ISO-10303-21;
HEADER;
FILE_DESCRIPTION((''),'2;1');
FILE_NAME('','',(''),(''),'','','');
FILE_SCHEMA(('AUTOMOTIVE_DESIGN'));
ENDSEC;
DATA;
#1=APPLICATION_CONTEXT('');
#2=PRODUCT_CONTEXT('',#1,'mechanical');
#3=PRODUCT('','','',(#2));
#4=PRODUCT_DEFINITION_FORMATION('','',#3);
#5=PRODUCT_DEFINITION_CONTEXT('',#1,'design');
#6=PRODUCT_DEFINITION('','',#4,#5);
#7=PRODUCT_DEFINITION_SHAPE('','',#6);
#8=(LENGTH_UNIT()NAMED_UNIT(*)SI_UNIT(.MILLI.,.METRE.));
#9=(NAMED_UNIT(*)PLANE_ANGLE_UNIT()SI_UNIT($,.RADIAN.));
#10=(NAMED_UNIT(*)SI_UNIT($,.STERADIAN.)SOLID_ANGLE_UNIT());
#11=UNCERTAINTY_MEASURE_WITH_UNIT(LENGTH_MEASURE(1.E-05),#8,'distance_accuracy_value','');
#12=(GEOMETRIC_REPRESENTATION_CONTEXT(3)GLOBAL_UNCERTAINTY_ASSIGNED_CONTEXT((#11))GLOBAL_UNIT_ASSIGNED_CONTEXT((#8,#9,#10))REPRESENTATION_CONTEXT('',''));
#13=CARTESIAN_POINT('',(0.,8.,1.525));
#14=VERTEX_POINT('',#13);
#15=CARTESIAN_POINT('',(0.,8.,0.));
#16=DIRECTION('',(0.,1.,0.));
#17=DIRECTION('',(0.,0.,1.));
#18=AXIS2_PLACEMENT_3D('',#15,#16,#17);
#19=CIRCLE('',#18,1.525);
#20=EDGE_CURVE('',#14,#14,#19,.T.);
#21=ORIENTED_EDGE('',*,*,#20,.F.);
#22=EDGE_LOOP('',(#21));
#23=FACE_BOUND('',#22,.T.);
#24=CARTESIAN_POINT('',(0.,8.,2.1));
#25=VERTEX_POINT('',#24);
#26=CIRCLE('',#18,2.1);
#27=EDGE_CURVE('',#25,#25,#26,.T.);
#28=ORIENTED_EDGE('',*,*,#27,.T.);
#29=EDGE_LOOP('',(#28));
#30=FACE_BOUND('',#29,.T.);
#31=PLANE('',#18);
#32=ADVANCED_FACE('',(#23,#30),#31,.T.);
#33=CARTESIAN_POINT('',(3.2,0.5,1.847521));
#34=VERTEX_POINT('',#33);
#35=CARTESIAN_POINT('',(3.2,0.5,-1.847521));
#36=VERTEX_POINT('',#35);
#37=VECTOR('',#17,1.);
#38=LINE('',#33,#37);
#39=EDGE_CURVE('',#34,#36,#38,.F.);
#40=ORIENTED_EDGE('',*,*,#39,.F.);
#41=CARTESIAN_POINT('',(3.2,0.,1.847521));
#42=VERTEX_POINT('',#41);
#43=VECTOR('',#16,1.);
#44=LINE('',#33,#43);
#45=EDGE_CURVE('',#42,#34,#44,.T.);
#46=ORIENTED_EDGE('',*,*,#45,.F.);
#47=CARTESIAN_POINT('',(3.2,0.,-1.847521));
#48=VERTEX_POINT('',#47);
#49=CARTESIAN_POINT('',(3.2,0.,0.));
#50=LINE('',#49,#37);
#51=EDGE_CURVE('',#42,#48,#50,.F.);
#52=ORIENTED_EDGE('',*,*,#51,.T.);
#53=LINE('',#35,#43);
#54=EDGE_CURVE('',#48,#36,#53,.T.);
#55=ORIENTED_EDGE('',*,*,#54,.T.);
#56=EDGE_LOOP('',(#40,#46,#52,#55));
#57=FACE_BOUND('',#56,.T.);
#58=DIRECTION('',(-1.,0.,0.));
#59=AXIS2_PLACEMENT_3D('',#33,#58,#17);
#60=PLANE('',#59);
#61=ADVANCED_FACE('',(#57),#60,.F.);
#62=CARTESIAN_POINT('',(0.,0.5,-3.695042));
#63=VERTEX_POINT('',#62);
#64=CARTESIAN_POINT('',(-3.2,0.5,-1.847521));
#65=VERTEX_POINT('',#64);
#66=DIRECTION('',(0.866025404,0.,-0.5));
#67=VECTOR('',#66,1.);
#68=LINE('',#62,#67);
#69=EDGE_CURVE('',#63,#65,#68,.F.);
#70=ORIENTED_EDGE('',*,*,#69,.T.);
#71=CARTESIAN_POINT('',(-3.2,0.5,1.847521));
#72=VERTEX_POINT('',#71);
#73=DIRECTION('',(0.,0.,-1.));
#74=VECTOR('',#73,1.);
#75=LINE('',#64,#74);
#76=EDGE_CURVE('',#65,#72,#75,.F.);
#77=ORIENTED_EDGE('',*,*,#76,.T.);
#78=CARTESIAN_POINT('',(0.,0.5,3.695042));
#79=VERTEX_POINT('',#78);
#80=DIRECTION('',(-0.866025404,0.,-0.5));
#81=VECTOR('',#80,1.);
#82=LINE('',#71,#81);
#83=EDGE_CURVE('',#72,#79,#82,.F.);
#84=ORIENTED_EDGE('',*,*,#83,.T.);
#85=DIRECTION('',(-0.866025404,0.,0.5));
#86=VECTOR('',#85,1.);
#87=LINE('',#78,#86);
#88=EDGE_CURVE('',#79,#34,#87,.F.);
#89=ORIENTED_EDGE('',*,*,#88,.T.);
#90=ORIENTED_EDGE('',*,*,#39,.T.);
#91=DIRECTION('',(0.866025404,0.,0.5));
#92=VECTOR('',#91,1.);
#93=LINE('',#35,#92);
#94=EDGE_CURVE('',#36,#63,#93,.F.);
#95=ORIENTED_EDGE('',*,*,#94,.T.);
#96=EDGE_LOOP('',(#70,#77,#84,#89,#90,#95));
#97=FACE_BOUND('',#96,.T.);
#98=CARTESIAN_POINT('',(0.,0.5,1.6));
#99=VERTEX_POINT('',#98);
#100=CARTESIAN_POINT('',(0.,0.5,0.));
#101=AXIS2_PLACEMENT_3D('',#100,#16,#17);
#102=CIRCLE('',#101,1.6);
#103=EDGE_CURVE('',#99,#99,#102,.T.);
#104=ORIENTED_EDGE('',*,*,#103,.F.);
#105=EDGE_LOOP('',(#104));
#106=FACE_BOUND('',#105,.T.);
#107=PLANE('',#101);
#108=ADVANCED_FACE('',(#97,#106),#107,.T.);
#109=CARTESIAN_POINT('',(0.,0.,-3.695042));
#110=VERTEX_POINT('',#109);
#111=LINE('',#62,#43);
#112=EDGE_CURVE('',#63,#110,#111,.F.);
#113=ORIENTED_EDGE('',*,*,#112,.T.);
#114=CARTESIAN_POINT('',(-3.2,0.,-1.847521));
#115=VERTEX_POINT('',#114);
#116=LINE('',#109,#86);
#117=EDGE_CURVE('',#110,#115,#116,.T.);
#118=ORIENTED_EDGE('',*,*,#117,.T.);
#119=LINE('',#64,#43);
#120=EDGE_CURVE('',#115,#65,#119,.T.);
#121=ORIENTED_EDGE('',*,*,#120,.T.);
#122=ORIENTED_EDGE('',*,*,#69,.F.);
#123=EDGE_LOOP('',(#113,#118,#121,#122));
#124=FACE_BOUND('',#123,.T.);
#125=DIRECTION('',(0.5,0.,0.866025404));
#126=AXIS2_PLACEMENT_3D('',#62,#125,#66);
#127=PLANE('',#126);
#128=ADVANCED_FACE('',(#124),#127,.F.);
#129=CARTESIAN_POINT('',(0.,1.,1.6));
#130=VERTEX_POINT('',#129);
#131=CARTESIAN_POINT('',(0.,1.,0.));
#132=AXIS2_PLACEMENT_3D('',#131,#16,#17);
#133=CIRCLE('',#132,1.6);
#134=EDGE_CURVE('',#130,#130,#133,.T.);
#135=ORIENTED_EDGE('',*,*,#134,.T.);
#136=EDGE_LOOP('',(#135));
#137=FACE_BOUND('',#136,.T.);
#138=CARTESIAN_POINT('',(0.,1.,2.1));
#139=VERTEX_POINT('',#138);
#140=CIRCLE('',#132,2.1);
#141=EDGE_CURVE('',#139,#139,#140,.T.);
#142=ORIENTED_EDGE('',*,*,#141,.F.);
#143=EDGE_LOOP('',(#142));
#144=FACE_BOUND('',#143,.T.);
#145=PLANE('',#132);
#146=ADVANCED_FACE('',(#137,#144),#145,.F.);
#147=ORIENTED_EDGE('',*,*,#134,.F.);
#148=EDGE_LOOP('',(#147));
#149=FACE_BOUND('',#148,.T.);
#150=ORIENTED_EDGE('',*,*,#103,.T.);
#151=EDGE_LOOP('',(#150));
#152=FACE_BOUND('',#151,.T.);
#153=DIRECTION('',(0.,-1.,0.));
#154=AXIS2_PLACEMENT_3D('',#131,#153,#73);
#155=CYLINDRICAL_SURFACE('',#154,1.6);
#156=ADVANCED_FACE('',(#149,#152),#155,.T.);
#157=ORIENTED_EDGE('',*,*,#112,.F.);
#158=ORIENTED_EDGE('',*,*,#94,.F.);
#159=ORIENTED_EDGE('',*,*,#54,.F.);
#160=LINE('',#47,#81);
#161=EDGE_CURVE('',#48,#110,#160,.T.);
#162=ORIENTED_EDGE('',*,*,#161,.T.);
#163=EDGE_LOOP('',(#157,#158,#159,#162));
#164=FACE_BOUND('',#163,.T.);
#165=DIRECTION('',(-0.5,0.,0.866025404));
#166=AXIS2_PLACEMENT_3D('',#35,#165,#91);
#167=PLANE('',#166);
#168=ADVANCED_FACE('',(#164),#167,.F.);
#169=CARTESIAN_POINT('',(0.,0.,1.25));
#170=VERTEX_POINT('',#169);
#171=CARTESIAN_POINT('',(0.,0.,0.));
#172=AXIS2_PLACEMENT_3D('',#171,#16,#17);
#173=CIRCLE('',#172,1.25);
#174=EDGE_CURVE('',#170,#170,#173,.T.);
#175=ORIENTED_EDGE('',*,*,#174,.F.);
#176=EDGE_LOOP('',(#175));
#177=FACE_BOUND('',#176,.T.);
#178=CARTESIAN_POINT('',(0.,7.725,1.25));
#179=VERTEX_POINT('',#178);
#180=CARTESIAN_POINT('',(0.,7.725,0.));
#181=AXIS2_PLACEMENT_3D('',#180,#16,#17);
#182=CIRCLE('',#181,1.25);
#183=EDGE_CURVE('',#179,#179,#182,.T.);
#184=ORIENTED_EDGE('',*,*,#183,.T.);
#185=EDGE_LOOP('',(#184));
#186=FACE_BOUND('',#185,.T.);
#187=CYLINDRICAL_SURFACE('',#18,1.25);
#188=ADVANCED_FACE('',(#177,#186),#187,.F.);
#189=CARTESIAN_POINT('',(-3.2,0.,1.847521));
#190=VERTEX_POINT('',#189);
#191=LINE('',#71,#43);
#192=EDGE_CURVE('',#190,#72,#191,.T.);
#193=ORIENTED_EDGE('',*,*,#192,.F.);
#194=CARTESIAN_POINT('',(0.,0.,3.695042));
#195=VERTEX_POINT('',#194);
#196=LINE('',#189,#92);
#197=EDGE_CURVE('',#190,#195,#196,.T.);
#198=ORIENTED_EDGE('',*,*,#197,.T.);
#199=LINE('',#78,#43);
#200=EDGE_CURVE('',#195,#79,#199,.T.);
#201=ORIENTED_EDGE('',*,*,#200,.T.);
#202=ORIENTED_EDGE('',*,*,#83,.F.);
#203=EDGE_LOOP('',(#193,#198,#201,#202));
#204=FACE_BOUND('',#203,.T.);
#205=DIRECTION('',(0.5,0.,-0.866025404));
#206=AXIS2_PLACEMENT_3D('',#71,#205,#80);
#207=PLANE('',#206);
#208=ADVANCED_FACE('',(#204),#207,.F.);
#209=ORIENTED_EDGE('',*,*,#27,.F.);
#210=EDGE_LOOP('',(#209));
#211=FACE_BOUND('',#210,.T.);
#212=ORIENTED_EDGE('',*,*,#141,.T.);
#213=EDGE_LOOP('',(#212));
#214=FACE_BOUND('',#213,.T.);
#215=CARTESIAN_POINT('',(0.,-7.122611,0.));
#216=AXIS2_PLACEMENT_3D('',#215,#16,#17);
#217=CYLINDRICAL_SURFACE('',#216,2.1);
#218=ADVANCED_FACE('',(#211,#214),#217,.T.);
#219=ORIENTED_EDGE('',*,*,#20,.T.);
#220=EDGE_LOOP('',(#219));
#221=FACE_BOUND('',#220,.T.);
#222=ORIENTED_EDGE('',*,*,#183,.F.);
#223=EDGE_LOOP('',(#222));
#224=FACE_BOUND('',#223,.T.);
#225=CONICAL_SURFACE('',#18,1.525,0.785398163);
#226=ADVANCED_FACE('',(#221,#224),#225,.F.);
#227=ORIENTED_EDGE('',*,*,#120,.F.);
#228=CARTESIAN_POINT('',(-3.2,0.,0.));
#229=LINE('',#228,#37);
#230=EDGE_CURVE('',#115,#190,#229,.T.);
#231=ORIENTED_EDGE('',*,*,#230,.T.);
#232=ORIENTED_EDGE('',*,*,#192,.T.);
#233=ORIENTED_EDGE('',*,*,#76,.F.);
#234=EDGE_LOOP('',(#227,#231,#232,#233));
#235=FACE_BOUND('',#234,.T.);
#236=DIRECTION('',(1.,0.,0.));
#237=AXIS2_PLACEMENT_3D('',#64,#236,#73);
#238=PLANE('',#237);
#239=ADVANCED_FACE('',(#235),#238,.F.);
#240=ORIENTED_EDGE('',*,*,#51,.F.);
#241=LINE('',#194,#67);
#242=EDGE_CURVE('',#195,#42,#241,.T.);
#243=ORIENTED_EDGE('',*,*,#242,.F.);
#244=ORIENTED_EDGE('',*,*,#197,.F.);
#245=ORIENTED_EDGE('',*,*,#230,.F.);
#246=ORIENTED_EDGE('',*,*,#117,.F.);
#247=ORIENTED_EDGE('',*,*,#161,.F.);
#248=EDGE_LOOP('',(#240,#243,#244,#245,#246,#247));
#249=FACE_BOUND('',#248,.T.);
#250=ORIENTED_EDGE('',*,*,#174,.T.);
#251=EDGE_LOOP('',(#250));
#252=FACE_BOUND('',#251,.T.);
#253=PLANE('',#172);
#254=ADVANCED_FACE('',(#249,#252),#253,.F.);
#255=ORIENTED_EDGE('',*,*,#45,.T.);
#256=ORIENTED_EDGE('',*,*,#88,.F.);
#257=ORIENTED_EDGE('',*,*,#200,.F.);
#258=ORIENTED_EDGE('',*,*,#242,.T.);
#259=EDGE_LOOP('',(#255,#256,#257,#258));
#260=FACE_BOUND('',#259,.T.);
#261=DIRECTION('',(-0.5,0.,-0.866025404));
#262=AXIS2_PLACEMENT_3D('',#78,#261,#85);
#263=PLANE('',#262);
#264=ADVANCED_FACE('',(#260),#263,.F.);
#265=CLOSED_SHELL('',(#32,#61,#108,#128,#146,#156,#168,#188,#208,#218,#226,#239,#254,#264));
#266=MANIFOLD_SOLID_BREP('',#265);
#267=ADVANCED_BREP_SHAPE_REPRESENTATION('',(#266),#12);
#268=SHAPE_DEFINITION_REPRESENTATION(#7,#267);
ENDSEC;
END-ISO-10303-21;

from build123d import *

# Parameters (mm, degrees)
RESSALTO_EXTRUS_O1_START            = -4.5
RESSALTO_EXTRUS_O1_OUTLINE_R        = 2.5
RESSALTO_EXTRUS_O1_DEPTH            = 4.5
RESSALTO_EXTRUS_O1_START_2          = -3.5
RESSALTO_EXTRUS_O1_2_OUTLINE_R      = 2.695
RESSALTO_EXTRUS_O1_2_OUTLINE_R_2    = 2.5
RESSALTO_EXTRUS_O1_2_DEPTH          = 3.5
RESSALTO_EXTRUS_O1_3_OUTLINE_R      = 2.5
RESSALTO_EXTRUS_O1_3_DEPTH          = 0.5
ESBO_O2_R                           = 2.695
RESSALTO_EXTRUS_O2_DEPTH            = 3.5
FURO_ROSCADO_DE_M3X0_51_D           = 2.5
FURO_ROSCADO_DE_M3X0_51_CSINK_D     = 3.05
FURO_ROSCADO_DE_M3X0_51_CSINK_ANGLE = 90
CORTE_EXTRUS_O1_START               = -7.5
ESBO_O7_R                           = 2.695
ESBO_O7_R_2                         = 2.1
CORTE_EXTRUS_O1_DEPTH               = 7.5
ESBO_O8_R                           = 2.1
ESBO_O8_R_2                         = 1.6
CORTE_EXTRUS_O2_DEPTH               = 0.5


with BuildPart() as part:
    # Ressalto-extrusão1: read off the stored shape, not the designer's step
    # Ressalto-extrusão1 outline → Ressalto-extrusão1 (new body)
    with BuildSketch(Plane(origin=(0, 4.5, 0), x_dir=(1, 0, 0), z_dir=(0, 1, 0)).offset(RESSALTO_EXTRUS_O1_START)):
        Circle(RESSALTO_EXTRUS_O1_OUTLINE_R)
    extrude(amount=RESSALTO_EXTRUS_O1_DEPTH)

    # Ressalto-extrus_o1 2 outline → Ressalto-extrus_o1 2 (add)
    with BuildSketch(Plane(origin=(0, 4.5, 0), x_dir=(1, 0, 0), z_dir=(0, 1, 0)).offset(RESSALTO_EXTRUS_O1_START_2)):
        Circle(RESSALTO_EXTRUS_O1_2_OUTLINE_R)
        Circle(RESSALTO_EXTRUS_O1_2_OUTLINE_R_2, mode=Mode.SUBTRACT)
    extrude(amount=RESSALTO_EXTRUS_O1_2_DEPTH)

    # Ressalto-extrus_o1 3 outline → Ressalto-extrus_o1 3 (add)
    with BuildSketch(Plane(origin=(0, 4.5, 0), x_dir=(1, 0, 0), z_dir=(0, 1, 0)).offset(RESSALTO_EXTRUS_O1_START)):
        Polygon((0, 3.695041723), (-3.2, 1.847520861), (-3.2, -1.847520861), (0, -3.695041723), (3.2, -1.847520861), (3.2, 1.847520861), align=None)
        Circle(RESSALTO_EXTRUS_O1_3_OUTLINE_R, mode=Mode.SUBTRACT)
    extrude(amount=RESSALTO_EXTRUS_O1_3_DEPTH)

    # Esboço2 → Ressalto-extrusão2 (add)
    with BuildSketch(Plane(origin=(0, 4.5, 0), x_dir=(1, 0, 0), z_dir=(0, 1, 0))):
        with Locations(Location((0, 0, 0), (0, 0, 90))):
            Circle(ESBO_O2_R)
    extrude(amount=RESSALTO_EXTRUS_O2_DEPTH)

    # Furo roscado de M3x0.51 (through all)
    with Locations(Plane(origin=(0, 8, 0), x_dir=(1, 0, 0), z_dir=(0, 1, 0))):
        with Locations((0, 0)):
            CounterSinkHole(FURO_ROSCADO_DE_M3X0_51_D / 2, FURO_ROSCADO_DE_M3X0_51_CSINK_D / 2, counter_sink_angle=FURO_ROSCADO_DE_M3X0_51_CSINK_ANGLE)

    # Esboço7 → Corte-extrusão1 (cut)
    with BuildSketch(Plane(origin=(0, 8, 0), x_dir=(1, 0, 0), z_dir=(0, 1, 0)).offset(CORTE_EXTRUS_O1_START)):
        Circle(ESBO_O7_R)
        with Locations(Location((0, 0, 0), (0, 0, 270))):
            Circle(ESBO_O7_R_2, mode=Mode.SUBTRACT)
    extrude(amount=CORTE_EXTRUS_O1_DEPTH, mode=Mode.SUBTRACT)

    # Esboço8 → Corte-extrusão2 (cut)
    with BuildSketch(Plane(origin=(0, 0.5, 0), x_dir=(1, 0, 0), z_dir=(0, 1, 0))):
        with Locations(Location((0, 0, 0), (0, 0, 270))):
            Circle(ESBO_O8_R)
        with Locations(Location((0, 0, 0), (0, 0, 270))):
            Circle(ESBO_O8_R_2, mode=Mode.SUBTRACT)
    extrude(amount=CORTE_EXTRUS_O2_DEPTH, mode=Mode.SUBTRACT)


solid = part.part
